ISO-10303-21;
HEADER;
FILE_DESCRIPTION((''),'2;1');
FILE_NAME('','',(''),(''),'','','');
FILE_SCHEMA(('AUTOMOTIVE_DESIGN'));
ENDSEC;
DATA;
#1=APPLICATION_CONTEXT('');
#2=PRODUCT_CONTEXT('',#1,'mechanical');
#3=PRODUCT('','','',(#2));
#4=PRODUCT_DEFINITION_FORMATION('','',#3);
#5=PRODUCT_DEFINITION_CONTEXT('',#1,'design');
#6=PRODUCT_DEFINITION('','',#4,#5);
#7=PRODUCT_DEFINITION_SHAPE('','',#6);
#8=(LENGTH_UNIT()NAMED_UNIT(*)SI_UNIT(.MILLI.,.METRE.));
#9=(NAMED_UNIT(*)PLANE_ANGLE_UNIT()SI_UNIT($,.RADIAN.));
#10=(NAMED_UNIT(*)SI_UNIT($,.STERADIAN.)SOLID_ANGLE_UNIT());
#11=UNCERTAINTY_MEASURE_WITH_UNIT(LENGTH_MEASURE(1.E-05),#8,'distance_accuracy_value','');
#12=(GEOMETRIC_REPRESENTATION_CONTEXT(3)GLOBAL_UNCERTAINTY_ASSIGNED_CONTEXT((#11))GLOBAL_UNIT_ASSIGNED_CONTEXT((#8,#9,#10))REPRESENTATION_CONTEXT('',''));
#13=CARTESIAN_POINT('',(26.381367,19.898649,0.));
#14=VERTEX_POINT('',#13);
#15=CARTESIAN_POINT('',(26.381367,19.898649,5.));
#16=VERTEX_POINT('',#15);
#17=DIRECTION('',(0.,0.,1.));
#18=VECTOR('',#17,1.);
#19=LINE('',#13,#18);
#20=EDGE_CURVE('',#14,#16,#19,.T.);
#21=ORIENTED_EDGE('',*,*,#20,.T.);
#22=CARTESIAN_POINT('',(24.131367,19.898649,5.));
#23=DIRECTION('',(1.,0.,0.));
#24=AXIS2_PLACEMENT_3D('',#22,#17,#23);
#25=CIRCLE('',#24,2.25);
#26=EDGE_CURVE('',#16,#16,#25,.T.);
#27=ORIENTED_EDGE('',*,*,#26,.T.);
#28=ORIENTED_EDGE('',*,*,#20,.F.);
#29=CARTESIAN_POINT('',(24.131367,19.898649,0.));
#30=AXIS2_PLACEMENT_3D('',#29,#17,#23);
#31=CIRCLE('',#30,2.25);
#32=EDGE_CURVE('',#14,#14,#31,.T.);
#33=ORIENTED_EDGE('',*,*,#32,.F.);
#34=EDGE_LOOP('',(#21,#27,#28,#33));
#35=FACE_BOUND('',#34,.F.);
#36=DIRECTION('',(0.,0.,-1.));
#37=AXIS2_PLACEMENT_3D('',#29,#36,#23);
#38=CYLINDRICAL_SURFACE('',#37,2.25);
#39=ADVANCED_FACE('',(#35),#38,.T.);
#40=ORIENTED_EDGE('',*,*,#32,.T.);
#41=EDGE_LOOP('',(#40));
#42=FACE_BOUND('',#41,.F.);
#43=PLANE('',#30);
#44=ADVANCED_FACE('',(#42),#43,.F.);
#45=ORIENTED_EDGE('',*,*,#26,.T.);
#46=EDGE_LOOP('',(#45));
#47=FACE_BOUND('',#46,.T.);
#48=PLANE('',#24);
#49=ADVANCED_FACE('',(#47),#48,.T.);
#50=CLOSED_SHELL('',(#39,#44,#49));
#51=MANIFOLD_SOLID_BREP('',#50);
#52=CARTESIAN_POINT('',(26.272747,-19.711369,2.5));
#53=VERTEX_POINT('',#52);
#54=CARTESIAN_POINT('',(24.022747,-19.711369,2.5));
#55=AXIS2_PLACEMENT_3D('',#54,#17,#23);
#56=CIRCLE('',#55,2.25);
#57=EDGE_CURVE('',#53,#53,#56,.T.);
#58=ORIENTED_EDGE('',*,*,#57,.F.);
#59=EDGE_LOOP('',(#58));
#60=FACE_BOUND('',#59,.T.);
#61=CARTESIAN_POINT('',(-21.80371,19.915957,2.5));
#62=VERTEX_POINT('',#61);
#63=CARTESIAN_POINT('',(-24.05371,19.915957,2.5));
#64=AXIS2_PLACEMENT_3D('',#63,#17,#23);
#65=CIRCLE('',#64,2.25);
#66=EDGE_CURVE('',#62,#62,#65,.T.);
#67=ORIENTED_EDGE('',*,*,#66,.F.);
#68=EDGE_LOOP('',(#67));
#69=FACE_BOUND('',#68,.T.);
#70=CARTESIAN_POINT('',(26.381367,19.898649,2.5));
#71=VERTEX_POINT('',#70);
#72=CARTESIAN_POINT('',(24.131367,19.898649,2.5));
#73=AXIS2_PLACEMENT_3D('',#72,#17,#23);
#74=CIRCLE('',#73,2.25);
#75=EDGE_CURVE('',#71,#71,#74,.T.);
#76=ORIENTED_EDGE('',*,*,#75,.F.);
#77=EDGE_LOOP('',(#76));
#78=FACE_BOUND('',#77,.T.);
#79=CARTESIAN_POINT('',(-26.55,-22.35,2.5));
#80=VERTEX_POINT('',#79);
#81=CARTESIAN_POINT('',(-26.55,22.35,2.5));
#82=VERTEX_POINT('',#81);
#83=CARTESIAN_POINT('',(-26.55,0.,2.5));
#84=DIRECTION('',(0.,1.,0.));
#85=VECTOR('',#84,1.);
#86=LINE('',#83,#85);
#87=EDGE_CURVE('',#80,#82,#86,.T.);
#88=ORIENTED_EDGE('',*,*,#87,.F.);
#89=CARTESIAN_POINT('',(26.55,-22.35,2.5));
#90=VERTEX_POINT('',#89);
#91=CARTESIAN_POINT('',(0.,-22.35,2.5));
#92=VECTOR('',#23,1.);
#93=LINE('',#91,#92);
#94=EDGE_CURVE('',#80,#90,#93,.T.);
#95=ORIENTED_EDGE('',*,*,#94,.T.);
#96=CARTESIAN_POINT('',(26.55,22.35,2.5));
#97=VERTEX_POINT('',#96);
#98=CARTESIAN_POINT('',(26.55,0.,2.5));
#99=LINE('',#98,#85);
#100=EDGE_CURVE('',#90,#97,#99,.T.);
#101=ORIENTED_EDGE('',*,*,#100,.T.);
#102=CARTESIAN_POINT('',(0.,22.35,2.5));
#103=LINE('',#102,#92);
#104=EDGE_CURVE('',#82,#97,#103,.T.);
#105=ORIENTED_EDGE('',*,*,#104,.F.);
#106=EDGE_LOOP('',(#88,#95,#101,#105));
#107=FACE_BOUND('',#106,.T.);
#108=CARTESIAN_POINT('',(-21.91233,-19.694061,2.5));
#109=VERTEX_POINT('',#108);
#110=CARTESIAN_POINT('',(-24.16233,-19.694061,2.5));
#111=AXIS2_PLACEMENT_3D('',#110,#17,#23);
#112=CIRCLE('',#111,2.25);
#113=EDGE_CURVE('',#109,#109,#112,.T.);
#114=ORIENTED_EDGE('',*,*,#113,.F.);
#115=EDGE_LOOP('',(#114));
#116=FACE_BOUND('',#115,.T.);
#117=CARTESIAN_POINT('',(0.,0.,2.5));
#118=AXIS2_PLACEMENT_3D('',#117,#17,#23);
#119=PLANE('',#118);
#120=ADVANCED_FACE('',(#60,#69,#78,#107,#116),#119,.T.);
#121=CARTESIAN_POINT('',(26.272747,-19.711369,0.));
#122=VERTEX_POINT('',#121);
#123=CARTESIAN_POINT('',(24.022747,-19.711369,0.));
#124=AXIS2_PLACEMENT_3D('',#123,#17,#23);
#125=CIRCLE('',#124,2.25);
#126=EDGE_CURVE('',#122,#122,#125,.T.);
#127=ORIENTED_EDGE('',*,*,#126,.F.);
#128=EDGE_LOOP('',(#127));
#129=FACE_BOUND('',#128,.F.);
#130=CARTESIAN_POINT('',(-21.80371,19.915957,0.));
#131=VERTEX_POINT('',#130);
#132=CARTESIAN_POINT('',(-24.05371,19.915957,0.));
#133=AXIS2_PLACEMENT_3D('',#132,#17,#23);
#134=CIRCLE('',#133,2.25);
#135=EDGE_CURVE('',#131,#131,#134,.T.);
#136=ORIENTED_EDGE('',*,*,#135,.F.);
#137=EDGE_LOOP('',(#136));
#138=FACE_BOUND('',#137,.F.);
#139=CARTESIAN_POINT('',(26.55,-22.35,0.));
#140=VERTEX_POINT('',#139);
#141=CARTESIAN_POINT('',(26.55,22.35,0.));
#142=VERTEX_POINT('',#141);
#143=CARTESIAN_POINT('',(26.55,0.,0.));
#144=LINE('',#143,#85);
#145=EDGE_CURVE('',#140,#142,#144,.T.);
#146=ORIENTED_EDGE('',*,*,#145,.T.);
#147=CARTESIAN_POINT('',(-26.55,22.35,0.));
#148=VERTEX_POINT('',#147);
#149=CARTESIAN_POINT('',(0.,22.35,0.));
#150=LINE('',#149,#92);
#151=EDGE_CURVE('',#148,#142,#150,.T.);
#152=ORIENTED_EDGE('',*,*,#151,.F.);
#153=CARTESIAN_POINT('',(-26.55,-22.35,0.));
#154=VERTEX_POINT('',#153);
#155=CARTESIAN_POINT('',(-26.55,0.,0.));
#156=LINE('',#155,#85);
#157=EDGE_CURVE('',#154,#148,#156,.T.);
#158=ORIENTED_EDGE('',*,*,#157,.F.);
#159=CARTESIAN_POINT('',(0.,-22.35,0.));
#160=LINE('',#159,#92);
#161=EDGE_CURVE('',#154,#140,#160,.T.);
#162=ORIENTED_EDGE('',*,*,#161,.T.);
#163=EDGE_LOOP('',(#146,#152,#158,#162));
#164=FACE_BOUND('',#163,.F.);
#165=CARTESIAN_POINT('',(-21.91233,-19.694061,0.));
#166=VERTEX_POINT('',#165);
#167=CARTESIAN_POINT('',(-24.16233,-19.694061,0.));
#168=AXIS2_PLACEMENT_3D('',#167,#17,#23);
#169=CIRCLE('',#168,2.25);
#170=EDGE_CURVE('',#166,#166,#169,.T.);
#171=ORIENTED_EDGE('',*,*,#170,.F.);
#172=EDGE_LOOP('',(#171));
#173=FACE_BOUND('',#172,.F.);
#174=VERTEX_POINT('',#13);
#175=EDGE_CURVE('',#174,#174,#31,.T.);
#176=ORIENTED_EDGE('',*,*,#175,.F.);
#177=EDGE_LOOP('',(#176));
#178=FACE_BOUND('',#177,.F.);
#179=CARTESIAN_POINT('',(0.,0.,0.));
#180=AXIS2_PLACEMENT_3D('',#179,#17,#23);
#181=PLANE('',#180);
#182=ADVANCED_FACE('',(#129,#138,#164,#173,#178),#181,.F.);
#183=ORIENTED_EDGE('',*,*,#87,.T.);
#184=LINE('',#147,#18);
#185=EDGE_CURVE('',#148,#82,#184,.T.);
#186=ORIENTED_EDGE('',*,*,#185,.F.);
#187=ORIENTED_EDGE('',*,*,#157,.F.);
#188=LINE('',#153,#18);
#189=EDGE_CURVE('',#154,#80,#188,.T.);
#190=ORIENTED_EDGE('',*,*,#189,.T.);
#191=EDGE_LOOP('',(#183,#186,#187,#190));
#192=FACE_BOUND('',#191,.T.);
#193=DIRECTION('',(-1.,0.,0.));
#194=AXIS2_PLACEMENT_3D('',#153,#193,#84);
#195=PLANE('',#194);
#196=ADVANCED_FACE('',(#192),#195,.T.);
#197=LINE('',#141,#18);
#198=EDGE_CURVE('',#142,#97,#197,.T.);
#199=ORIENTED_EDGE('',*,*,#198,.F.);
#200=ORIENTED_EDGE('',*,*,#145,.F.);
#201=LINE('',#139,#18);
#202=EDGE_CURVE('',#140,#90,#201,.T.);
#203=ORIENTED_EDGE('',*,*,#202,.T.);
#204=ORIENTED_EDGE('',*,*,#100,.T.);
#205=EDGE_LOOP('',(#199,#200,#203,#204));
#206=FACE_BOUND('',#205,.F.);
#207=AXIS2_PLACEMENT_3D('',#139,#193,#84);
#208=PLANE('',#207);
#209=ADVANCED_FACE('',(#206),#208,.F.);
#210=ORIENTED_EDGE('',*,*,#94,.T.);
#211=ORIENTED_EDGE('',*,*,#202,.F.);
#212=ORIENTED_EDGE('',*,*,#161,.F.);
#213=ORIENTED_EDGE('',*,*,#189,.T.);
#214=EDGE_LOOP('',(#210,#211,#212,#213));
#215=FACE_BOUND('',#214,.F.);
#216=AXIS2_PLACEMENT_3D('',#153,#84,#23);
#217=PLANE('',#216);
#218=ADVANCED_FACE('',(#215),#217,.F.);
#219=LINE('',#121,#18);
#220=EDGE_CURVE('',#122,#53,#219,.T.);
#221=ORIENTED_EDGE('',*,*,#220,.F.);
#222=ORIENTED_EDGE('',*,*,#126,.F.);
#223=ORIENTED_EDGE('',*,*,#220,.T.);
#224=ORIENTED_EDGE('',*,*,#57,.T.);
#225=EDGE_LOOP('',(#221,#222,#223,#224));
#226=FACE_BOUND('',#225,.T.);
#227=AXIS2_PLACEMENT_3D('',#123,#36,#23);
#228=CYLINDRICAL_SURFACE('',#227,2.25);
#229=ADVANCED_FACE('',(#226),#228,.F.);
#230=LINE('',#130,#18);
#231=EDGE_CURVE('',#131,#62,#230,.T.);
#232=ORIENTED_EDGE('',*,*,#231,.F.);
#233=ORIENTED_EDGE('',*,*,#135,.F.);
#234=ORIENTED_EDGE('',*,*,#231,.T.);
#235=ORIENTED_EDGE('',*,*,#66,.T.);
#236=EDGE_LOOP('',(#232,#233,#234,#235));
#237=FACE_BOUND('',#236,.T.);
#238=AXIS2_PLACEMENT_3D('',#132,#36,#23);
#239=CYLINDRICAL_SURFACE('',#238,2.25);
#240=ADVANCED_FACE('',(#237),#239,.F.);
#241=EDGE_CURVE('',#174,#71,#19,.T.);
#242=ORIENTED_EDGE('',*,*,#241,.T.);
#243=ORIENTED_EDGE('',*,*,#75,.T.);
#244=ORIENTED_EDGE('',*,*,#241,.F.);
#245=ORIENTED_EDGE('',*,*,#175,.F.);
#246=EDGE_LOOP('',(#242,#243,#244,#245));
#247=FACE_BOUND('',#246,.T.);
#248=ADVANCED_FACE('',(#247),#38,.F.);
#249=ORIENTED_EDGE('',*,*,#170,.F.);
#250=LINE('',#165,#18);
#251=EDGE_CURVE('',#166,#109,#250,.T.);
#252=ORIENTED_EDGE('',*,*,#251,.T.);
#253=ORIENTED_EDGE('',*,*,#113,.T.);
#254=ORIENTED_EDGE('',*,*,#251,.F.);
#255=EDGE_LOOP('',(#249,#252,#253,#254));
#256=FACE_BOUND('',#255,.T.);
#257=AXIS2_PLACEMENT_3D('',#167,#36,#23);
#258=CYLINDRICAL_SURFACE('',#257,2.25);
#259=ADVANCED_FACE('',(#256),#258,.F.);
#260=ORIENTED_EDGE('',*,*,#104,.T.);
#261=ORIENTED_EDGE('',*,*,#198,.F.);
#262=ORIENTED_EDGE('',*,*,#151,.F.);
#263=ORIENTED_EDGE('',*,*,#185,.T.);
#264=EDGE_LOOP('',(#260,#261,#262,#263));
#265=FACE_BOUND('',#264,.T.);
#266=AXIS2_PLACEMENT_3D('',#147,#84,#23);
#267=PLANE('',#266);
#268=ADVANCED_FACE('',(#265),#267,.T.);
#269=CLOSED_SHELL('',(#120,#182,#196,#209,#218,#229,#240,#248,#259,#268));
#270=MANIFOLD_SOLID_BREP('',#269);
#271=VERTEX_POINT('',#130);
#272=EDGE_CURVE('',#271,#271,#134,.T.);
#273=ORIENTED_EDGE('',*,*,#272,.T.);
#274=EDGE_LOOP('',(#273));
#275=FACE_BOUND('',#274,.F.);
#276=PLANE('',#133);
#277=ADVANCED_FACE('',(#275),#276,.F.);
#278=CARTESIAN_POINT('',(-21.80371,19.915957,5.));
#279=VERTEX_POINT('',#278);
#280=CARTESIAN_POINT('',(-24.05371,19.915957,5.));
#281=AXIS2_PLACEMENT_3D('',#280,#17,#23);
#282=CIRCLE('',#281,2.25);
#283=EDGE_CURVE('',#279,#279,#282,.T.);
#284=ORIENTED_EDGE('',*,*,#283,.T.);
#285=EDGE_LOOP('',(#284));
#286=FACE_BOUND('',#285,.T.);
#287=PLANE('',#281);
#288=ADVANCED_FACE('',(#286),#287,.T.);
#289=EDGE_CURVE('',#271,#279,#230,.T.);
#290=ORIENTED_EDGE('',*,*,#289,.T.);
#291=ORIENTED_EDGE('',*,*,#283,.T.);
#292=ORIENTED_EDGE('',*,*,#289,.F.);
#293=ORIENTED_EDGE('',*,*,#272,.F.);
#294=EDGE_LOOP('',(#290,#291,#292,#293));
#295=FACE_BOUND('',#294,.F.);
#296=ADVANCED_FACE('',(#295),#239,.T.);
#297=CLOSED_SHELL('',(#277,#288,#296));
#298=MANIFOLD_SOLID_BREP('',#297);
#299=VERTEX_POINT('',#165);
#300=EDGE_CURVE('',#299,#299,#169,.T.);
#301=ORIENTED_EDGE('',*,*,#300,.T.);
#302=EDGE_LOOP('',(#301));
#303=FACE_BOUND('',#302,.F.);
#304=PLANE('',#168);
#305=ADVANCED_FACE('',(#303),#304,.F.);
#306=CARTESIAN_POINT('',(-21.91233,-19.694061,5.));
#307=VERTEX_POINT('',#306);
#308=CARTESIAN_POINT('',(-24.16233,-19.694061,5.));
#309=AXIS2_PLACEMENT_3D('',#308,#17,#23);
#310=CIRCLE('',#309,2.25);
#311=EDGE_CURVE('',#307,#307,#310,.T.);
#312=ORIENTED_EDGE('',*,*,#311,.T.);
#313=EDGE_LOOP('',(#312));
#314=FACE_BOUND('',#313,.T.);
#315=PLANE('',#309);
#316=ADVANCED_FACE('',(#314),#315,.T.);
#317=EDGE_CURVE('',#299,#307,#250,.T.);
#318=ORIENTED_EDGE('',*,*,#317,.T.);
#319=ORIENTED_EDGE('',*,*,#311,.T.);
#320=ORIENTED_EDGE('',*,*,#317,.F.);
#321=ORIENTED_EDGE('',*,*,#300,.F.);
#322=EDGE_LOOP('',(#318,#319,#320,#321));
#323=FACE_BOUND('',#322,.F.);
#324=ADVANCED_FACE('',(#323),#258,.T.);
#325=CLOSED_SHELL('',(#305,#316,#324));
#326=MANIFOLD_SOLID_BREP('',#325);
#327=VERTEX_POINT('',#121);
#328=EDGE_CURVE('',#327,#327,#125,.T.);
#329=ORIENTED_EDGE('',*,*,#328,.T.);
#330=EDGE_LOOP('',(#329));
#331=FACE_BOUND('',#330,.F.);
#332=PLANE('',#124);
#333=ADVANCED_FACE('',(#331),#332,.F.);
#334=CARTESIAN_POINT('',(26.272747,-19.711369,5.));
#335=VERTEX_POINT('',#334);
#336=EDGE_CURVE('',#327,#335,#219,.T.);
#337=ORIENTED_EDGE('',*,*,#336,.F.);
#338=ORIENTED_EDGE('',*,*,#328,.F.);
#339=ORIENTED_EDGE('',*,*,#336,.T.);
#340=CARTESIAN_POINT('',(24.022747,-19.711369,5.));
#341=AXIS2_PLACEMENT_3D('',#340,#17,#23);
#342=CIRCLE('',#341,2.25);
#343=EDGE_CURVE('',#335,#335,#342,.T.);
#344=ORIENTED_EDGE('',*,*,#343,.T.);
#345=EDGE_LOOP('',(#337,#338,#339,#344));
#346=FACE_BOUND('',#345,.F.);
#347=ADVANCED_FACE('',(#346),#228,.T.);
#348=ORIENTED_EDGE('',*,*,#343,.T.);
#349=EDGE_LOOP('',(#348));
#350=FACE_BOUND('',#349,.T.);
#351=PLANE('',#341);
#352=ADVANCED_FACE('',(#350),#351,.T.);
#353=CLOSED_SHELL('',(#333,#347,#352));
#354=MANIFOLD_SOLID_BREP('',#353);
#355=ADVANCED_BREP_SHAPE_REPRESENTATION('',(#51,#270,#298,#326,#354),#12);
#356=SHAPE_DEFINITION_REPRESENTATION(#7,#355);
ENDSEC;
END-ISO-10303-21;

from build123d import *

# Parameters (mm, degrees)
F0_R     = 2.25
F1_DEPTH = 5
F0_W     = 53.1
F0_H     = 44.7
F2_DEPTH = 2.5


# Not quite as in the source:
# - the program builds the solid bodies; features that only make, move or delete a surface that nothing else refers to are left out


with BuildPart() as f1:
    # F0 (on Top) → F1 (new body)
    with BuildSketch(Plane.XY):
        with Locations((24.1313669831, 19.8986493051)):
            Circle(F0_R)
    extrude(amount=F1_DEPTH)


with BuildPart() as f1b:
    # F0 (on Top) → F1, piece 2 (new body)
    with BuildSketch(Plane.XY):
        with Locations((-24.0537095815, 19.9159570038)):
            Circle(F0_R)
    extrude(amount=F1_DEPTH)


with BuildPart() as f1c:
    # F0 (on Top) → F1, piece 3 (new body)
    with BuildSketch(Plane.XY):
        with Locations((-24.1623297334, -19.694061164)):
            Circle(F0_R)
    extrude(amount=F1_DEPTH)


with BuildPart() as f1d:
    # F0 (on Top) → F1, piece 4 (new body)
    with BuildSketch(Plane.XY):
        with Locations((24.0227468312, -19.7113688628)):
            Circle(F0_R)
    extrude(amount=F1_DEPTH)


with BuildPart() as f2:
    # F0 (on Top) → F2 (new body)
    with BuildSketch(Plane.XY):
        Rectangle(F0_W, F0_H)
        with Locations((-24.1623297334, -19.694061164)):
            Circle(F0_R, mode=Mode.SUBTRACT)
        with Locations((24.0227468312, -19.7113688628)):
            Circle(F0_R, mode=Mode.SUBTRACT)
        with Locations((-24.0537095815, 19.9159570038)):
            Circle(F0_R, mode=Mode.SUBTRACT)
        with Locations((24.1313669831, 19.8986493051)):
            Circle(F0_R, mode=Mode.SUBTRACT)
    extrude(amount=F2_DEPTH)


solid = Compound([f1.part, f1b.part, f1c.part, f1d.part, f2.part])
